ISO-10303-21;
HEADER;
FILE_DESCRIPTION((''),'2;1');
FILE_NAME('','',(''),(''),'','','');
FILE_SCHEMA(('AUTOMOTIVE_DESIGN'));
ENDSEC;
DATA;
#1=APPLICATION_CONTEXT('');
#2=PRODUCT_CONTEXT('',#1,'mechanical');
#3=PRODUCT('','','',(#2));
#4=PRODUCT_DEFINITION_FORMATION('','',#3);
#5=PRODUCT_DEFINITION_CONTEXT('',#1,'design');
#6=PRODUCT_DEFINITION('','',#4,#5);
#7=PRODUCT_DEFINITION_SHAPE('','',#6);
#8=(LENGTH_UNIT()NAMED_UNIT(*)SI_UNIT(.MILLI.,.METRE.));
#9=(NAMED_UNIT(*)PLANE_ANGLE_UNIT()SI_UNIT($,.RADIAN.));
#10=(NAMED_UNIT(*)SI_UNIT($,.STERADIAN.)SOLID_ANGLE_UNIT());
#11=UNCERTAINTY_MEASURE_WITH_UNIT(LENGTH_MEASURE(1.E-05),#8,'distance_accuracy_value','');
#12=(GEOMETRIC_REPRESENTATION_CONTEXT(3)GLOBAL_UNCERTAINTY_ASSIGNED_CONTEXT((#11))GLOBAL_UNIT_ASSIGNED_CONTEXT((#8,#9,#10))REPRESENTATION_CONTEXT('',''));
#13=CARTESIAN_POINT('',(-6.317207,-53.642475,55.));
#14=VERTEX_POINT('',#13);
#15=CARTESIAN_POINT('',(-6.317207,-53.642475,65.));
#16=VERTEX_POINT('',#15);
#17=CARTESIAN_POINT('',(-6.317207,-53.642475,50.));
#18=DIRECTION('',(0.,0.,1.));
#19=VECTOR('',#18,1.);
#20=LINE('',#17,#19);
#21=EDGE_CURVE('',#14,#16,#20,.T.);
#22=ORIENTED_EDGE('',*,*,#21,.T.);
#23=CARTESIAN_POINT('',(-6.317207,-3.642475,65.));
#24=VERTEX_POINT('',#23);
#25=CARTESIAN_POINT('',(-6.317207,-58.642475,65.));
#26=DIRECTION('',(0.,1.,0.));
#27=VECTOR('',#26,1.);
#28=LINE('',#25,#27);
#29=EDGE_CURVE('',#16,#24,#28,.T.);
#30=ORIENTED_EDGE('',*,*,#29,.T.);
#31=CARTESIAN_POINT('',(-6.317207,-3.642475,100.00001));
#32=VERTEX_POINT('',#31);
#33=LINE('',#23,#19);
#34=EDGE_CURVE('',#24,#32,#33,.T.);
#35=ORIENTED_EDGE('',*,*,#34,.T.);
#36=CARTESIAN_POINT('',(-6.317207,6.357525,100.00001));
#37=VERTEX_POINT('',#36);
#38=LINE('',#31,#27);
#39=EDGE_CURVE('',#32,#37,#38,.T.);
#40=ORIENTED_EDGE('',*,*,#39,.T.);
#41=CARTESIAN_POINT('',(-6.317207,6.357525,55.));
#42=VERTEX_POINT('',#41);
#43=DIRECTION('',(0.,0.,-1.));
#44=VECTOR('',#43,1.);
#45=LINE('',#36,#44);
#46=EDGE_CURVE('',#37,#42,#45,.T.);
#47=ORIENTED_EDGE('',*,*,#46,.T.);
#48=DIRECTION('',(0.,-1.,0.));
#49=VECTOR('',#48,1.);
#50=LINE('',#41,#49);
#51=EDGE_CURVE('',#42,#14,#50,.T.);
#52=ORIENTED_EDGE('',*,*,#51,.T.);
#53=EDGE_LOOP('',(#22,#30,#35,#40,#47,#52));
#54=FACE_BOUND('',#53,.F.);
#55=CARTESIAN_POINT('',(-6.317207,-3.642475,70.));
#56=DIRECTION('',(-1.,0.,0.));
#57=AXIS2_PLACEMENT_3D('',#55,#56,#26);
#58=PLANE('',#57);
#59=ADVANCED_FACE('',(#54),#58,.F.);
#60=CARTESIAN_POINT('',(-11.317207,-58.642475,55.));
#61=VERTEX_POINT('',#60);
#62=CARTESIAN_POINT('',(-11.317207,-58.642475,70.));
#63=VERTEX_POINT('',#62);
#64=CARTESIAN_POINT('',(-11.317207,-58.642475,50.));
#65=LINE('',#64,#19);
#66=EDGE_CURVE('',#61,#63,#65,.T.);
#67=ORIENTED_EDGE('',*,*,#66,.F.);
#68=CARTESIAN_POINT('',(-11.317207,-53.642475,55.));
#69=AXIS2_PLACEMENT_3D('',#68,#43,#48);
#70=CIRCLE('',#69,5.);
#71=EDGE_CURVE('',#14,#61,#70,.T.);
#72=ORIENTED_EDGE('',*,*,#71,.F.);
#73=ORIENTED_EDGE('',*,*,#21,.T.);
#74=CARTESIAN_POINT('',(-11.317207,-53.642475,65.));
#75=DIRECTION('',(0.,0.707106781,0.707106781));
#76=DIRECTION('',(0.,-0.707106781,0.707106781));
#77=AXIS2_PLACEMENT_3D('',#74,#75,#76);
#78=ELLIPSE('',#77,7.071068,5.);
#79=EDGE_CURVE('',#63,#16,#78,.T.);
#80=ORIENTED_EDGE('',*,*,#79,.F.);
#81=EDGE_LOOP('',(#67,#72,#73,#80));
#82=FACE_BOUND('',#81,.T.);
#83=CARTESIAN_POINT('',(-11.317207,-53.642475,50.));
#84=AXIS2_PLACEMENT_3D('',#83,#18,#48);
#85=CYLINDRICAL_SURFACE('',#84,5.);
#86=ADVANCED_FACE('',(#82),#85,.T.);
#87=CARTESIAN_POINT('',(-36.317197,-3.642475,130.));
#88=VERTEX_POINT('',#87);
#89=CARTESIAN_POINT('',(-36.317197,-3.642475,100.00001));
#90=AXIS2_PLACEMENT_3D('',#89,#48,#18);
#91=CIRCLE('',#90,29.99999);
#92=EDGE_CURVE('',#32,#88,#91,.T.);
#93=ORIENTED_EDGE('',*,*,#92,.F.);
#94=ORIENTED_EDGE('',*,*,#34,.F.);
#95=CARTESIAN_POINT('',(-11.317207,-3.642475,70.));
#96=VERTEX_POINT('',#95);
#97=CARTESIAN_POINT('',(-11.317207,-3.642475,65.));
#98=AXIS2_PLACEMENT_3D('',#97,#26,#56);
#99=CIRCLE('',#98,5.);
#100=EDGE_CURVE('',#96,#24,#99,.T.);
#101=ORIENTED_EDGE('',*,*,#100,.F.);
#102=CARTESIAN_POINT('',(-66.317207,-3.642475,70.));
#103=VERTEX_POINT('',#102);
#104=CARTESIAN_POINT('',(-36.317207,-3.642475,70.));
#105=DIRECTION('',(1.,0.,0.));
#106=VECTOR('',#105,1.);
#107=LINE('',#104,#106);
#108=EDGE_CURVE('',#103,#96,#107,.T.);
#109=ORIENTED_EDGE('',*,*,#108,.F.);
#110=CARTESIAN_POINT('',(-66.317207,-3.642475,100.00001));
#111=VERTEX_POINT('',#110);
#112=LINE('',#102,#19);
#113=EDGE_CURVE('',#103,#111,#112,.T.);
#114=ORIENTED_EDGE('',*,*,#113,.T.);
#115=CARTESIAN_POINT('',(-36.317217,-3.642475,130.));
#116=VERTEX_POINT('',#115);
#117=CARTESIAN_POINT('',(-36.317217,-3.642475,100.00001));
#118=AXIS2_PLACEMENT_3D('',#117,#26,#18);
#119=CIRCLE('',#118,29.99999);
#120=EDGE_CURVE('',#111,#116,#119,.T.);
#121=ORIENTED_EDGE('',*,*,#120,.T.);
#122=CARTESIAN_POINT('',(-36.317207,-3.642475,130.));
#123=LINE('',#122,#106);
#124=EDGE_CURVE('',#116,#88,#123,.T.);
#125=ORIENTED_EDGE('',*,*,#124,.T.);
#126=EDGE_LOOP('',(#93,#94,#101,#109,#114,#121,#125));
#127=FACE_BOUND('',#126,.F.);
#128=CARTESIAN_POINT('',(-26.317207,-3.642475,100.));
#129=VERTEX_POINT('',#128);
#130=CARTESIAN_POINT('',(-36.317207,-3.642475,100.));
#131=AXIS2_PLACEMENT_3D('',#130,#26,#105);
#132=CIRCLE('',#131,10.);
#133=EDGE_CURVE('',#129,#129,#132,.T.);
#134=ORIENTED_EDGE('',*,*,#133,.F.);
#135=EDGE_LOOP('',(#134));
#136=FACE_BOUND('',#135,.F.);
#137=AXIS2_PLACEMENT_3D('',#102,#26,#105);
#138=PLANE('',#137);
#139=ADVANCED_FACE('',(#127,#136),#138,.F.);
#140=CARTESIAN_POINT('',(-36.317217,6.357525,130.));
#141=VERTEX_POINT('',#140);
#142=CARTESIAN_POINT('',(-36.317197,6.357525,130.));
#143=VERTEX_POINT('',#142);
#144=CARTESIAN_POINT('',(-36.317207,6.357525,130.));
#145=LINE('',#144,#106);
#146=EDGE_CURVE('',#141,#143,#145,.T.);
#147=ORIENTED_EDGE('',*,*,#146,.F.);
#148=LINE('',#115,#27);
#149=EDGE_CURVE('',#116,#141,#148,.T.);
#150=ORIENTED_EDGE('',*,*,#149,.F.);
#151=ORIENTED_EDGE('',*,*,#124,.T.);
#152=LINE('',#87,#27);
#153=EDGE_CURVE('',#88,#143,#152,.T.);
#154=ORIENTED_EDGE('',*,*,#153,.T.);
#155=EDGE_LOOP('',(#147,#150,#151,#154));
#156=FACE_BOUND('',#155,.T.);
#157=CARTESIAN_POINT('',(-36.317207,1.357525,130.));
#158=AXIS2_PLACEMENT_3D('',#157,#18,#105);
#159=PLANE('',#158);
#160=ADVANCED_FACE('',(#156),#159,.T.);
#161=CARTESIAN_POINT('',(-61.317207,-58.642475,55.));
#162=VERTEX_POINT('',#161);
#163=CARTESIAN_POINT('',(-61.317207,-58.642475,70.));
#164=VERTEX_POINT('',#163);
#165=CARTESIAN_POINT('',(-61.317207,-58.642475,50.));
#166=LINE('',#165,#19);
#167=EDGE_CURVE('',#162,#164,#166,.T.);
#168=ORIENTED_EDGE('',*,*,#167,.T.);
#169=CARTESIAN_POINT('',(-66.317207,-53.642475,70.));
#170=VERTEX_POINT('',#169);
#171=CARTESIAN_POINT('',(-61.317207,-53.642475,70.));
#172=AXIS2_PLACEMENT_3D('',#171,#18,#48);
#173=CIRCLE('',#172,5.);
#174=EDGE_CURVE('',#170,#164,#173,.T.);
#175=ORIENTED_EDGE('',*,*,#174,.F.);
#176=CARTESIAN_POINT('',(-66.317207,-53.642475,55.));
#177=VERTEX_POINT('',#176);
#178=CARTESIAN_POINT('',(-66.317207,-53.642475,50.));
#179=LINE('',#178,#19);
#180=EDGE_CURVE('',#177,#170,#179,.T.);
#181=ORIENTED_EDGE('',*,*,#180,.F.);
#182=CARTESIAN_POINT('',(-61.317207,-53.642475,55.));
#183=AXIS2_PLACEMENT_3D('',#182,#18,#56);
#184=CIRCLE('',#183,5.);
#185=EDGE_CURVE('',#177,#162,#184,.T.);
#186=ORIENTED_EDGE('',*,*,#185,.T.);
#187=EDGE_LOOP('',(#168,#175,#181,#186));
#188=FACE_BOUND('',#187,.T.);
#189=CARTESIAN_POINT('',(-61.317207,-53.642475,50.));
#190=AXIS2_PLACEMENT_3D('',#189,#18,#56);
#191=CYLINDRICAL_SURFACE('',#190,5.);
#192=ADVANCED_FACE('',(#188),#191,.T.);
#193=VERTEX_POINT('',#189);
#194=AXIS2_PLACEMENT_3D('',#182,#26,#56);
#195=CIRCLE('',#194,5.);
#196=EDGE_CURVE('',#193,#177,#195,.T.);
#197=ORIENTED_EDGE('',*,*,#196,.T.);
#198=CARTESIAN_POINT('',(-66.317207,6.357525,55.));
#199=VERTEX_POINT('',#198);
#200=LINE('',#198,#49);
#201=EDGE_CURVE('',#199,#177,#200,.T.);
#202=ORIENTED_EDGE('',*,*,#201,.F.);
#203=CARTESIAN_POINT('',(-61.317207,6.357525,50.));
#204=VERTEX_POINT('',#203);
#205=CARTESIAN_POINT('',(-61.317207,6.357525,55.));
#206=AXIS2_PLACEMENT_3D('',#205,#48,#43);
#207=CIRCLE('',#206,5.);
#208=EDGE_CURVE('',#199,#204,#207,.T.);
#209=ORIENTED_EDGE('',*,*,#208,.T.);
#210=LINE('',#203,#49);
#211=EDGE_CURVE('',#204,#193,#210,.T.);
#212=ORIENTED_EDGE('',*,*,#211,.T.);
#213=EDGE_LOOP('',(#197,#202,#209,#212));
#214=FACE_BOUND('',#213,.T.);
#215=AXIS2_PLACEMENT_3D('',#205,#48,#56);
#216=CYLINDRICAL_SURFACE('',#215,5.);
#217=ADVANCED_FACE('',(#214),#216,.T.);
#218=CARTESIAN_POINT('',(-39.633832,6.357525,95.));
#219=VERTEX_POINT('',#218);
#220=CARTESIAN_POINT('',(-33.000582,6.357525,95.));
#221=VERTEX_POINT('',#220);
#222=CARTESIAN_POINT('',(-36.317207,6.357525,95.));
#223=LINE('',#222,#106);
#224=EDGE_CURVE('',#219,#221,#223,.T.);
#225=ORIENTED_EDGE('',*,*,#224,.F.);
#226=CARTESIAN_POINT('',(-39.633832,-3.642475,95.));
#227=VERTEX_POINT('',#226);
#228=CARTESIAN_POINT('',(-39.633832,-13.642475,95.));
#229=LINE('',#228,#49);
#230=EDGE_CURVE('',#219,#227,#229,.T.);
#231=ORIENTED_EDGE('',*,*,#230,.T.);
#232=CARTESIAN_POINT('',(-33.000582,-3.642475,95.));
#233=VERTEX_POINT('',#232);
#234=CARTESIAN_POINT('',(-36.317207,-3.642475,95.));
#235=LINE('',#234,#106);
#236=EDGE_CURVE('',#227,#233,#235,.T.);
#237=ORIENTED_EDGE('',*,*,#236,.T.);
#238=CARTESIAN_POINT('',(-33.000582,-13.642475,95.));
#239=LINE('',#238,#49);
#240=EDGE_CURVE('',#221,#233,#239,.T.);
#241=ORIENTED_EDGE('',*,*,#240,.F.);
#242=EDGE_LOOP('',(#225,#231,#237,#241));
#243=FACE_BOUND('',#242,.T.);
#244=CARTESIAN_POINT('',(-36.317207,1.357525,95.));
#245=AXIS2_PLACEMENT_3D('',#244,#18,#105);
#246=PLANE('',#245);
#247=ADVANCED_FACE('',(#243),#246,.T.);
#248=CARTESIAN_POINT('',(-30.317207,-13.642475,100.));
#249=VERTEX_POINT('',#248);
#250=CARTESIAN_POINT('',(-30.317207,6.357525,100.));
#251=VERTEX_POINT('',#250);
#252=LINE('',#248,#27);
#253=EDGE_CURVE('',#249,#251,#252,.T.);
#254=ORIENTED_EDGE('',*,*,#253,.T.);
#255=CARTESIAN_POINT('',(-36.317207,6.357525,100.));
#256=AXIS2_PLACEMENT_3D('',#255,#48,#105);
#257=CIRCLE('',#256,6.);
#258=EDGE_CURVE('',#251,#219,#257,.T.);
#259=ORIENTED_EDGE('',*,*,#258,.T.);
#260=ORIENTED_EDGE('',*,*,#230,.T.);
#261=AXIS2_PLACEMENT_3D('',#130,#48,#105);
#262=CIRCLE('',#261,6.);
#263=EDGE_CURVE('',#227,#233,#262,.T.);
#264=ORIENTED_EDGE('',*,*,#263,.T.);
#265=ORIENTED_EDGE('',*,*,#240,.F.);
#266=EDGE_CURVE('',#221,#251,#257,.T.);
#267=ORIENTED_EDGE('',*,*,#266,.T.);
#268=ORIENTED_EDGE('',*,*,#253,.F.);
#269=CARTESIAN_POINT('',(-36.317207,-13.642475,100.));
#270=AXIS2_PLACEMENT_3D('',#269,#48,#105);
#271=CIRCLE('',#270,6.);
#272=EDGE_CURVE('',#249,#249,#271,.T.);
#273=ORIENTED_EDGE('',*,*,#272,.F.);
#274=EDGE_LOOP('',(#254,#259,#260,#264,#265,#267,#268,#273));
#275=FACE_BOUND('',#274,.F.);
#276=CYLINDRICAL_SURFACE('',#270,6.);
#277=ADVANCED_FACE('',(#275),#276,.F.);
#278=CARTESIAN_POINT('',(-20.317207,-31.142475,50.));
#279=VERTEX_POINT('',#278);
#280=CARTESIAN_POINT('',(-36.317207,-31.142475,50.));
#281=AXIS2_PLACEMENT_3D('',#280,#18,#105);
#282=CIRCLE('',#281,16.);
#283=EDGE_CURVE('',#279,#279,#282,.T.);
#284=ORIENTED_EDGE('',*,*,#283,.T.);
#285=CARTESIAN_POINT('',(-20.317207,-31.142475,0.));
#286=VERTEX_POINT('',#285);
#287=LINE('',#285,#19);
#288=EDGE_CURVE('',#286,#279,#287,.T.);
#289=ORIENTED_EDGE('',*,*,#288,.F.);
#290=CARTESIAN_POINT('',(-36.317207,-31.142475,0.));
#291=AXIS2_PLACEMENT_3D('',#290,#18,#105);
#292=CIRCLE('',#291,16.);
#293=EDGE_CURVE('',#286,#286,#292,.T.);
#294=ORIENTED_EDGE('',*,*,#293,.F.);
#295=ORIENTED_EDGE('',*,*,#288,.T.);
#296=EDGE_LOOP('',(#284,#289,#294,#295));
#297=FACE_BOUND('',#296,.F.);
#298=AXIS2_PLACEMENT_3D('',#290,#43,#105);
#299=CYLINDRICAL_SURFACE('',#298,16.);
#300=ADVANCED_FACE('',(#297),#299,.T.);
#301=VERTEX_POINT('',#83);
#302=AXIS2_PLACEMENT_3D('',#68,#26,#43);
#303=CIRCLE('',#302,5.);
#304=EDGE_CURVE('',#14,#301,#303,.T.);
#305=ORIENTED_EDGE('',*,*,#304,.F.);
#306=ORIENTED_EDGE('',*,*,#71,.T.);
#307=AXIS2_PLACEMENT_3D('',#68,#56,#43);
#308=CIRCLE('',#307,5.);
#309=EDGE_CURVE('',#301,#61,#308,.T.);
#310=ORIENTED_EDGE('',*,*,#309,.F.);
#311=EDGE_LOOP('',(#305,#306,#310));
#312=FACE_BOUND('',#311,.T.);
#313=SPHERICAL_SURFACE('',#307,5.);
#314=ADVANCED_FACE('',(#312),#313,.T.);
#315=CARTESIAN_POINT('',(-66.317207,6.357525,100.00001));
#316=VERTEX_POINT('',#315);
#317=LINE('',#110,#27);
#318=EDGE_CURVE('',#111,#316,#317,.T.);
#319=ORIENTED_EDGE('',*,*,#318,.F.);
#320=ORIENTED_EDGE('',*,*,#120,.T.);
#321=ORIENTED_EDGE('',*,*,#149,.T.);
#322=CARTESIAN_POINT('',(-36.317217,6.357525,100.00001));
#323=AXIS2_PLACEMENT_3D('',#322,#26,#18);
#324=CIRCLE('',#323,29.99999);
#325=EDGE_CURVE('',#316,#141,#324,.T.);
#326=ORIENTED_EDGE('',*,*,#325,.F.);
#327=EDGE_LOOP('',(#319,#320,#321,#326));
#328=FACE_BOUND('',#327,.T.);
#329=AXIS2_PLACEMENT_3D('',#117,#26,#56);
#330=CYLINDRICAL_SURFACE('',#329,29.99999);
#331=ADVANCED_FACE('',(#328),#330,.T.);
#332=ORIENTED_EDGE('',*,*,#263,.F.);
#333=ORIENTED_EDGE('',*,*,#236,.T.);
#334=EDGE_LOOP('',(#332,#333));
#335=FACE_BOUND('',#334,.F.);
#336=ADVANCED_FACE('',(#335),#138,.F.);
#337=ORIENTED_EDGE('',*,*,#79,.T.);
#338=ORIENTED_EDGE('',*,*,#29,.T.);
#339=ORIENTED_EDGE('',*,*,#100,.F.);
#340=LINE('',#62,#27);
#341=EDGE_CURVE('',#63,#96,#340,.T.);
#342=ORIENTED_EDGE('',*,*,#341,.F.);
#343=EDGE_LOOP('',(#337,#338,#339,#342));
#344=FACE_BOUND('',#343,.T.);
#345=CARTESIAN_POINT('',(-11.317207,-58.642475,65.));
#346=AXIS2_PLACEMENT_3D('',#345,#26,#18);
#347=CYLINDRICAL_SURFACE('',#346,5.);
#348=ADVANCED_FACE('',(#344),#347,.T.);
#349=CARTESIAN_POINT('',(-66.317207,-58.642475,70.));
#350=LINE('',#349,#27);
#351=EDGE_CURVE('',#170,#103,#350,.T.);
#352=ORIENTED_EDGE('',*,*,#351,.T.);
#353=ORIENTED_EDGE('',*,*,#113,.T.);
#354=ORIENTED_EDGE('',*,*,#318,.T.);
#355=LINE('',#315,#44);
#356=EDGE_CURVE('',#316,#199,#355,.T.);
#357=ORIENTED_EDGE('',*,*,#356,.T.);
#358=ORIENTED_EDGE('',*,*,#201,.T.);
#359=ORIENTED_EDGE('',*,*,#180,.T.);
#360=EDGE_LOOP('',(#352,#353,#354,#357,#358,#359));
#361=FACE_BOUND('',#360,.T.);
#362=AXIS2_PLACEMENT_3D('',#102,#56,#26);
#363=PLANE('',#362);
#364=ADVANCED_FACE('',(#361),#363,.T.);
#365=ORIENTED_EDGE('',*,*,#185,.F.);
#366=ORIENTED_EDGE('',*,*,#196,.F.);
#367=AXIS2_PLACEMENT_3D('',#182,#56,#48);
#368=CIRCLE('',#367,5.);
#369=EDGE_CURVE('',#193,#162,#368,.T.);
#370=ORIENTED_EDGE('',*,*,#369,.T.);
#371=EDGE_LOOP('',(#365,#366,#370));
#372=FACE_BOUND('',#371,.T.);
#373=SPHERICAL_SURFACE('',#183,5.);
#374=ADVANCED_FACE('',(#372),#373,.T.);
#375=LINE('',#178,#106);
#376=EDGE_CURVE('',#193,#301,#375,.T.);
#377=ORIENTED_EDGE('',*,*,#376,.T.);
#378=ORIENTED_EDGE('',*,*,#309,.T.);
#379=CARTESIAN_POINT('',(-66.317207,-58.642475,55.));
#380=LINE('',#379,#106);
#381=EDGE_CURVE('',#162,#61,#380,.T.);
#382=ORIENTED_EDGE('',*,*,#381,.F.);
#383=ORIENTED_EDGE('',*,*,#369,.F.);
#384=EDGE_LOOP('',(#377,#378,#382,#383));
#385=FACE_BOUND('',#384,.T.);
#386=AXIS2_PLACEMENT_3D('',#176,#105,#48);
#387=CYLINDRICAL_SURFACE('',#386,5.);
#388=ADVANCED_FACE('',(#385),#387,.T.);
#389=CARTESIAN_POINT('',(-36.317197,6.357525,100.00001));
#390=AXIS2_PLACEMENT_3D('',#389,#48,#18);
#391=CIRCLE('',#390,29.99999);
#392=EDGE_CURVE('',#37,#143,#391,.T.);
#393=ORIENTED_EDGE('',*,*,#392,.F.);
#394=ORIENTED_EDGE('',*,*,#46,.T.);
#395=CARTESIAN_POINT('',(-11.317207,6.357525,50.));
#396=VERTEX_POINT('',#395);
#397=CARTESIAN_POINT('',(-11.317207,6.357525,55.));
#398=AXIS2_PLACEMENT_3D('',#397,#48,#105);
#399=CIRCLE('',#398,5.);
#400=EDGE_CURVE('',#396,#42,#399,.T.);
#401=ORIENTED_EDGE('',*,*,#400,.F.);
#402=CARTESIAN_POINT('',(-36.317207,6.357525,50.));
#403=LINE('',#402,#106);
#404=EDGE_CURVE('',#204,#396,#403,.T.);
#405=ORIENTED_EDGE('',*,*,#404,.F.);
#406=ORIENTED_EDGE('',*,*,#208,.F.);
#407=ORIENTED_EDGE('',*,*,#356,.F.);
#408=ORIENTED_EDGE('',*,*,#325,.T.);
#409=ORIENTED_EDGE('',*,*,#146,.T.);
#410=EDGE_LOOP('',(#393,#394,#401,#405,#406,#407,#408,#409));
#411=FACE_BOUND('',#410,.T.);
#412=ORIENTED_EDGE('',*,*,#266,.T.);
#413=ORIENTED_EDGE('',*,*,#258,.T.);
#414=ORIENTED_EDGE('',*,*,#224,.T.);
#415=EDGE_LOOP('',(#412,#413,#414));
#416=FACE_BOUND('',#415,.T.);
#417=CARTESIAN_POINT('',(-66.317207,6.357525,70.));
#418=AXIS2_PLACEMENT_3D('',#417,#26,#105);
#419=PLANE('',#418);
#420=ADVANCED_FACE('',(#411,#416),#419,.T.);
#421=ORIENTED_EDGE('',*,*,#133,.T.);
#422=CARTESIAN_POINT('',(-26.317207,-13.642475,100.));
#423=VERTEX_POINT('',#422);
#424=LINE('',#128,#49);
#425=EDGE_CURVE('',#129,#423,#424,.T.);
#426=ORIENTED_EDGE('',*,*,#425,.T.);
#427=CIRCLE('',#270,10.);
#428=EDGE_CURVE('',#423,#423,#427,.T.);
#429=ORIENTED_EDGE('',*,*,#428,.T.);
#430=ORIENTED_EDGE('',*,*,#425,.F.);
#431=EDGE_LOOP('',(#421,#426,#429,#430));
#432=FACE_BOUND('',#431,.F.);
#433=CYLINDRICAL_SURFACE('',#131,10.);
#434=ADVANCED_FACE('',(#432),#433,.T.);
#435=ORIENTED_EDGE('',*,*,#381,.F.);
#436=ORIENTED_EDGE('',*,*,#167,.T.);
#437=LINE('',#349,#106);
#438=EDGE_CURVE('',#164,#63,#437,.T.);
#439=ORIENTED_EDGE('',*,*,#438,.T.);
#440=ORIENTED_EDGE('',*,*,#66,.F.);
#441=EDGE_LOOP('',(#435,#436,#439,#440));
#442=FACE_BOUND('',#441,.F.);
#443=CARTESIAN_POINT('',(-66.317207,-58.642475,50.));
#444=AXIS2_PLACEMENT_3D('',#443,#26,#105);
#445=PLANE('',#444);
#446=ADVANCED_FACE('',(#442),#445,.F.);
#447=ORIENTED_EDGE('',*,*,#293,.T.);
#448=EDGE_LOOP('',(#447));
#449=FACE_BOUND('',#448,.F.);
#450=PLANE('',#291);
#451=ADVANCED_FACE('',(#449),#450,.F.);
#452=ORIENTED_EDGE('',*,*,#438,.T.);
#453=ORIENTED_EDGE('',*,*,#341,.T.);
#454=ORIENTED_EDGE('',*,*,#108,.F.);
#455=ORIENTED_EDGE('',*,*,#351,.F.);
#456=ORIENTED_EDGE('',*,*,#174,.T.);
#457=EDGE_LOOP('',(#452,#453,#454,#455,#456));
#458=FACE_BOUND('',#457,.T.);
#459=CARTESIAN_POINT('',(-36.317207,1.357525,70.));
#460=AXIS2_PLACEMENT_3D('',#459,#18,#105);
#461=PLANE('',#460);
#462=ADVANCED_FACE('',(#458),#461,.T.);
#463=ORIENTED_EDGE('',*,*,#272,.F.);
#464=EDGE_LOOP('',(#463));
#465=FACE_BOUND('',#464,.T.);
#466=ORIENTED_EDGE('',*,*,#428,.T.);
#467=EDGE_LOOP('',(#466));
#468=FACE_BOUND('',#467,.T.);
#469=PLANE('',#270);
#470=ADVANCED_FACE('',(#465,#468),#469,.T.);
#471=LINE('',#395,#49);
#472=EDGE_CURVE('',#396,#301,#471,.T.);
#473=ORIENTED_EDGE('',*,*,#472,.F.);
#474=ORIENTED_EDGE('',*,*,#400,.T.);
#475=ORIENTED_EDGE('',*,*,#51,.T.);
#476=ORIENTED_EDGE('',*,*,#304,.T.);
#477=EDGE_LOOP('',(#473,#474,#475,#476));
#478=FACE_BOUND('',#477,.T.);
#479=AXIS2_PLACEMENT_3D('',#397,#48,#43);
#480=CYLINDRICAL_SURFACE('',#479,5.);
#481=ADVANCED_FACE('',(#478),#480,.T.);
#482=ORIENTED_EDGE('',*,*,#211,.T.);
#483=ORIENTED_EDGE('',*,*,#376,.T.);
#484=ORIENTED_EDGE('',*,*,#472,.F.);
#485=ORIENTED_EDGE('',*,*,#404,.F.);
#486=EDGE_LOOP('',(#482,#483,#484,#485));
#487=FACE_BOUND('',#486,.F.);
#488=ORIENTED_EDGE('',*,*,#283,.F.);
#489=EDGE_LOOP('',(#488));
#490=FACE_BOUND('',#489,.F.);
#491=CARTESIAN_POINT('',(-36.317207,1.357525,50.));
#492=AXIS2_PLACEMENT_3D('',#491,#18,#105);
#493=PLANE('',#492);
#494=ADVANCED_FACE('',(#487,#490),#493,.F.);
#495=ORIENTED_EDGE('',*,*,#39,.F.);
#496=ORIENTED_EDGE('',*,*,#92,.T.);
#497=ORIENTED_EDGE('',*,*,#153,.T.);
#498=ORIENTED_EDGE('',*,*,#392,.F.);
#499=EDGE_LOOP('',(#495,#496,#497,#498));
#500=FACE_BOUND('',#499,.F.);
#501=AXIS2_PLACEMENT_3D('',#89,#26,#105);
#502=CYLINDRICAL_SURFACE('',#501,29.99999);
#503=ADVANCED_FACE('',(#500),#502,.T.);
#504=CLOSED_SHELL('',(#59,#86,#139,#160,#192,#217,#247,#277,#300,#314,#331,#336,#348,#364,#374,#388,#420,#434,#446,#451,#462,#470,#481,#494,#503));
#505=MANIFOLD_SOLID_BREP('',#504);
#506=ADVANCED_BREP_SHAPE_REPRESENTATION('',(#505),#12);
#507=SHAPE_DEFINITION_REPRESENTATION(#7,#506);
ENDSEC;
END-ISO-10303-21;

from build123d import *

# Parameters (mm, degrees)
F0_R      = 16
F1_DEPTH  = 50
F3_DEPTH  = 20
F4_W      = 60
F4_H      = 10
F5_DEPTH  = 20
F6_W      = 60
F6_H      = 10
F7_DEPTH  = 60
F8_R      = 29.99999
F9_R      = 10
F10_DEPTH = 10
F11_R     = 6
F12_DEPTH = 20.001
F14_R     = 5
F15_DEPTH = 25


# Not quite as in the source:
# - a fillet or chamfer is up to 0.001 mm smaller than in the source, because OpenCascade refuses the exact size


with BuildPart() as f1:
    # F0 (on Top) → F1 (new body)
    with BuildSketch(Plane.XY):
        with Locations((-36.3172069192, -31.1424750835)):
            Circle(F0_R)
    extrude(amount=F1_DEPTH)

    # F2 (on face) → F3 (join)
    with BuildSketch(Plane.XY.offset(50)):
        Polygon((-66.3172069192, -3.6424750835), (-66.3172069192, -31.1424750835), (-66.3172069192, -58.6424750835), (-36.3172069192, -58.6424750835), (-6.3172069192, -58.6424750835), (-6.3172069192, -31.1424750835), (-6.3172069192, -3.6424750835), (-36.3172069192, -3.6424750835), align=None)
    extrude(amount=F3_DEPTH)

    # F4 (on face) → F5 (join)
    with BuildSketch(Plane.XY.offset(70)):
        with Locations((-36.3172069192, 1.3575249165)):
            Rectangle(F4_W, F4_H)
    extrude(amount=-F5_DEPTH)

    # F6 (on face) → F7 (join)
    with BuildSketch(Plane.XY.offset(70)):
        with Locations((-36.3172069192, 1.3575249165)):
            Rectangle(F6_W, F6_H)
    extrude(amount=F7_DEPTH)

    # F8 (radius 30 in the source; OpenCascade refuses exactly that, so slightly less here)
    f8_edges = [f1.edges().sort_by_distance(p)[0] for p in [
        (-66.317207, 1.357525, 130),
        (-6.317207, 1.357525, 130),
    ]]
    fillet(f8_edges, radius=F8_R)

    # F9 (on face) → F10 (join)
    with BuildSketch(Plane.XZ.offset(3.6424750835)):
        with Locations((-36.3172069192, 100)):
            Circle(F9_R)
    extrude(amount=F10_DEPTH)

    # F11 (on face) → F12 (cut, through all)
    with BuildSketch(Plane.XZ.offset(13.6424750835)):
        with Locations((-36.3172069192, 100)):
            Circle(F11_R)
    extrude(amount=-F12_DEPTH, mode=Mode.SUBTRACT)

    # F14
    f14_edges = [f1.edges().sort_by_distance(p)[0] for p in [
        (-66.317207, -58.642475, 60),
        (-66.317207, -26.142475, 50),
        (-36.317207, -58.642475, 50),
        (-6.317207, -26.142475, 50),
        (-6.317207, -58.642475, 60),
        (-6.317207, -31.142475, 70),
    ]]
    fillet(f14_edges, radius=F14_R)

    # F6 (on face) → F15 (join)
    with BuildSketch(Plane.XY.offset(70)):
        with Locations((-36.3172069192, 1.3575249165)):
            Rectangle(F6_W, F6_H)
    extrude(amount=F15_DEPTH)


solid = f1.part
